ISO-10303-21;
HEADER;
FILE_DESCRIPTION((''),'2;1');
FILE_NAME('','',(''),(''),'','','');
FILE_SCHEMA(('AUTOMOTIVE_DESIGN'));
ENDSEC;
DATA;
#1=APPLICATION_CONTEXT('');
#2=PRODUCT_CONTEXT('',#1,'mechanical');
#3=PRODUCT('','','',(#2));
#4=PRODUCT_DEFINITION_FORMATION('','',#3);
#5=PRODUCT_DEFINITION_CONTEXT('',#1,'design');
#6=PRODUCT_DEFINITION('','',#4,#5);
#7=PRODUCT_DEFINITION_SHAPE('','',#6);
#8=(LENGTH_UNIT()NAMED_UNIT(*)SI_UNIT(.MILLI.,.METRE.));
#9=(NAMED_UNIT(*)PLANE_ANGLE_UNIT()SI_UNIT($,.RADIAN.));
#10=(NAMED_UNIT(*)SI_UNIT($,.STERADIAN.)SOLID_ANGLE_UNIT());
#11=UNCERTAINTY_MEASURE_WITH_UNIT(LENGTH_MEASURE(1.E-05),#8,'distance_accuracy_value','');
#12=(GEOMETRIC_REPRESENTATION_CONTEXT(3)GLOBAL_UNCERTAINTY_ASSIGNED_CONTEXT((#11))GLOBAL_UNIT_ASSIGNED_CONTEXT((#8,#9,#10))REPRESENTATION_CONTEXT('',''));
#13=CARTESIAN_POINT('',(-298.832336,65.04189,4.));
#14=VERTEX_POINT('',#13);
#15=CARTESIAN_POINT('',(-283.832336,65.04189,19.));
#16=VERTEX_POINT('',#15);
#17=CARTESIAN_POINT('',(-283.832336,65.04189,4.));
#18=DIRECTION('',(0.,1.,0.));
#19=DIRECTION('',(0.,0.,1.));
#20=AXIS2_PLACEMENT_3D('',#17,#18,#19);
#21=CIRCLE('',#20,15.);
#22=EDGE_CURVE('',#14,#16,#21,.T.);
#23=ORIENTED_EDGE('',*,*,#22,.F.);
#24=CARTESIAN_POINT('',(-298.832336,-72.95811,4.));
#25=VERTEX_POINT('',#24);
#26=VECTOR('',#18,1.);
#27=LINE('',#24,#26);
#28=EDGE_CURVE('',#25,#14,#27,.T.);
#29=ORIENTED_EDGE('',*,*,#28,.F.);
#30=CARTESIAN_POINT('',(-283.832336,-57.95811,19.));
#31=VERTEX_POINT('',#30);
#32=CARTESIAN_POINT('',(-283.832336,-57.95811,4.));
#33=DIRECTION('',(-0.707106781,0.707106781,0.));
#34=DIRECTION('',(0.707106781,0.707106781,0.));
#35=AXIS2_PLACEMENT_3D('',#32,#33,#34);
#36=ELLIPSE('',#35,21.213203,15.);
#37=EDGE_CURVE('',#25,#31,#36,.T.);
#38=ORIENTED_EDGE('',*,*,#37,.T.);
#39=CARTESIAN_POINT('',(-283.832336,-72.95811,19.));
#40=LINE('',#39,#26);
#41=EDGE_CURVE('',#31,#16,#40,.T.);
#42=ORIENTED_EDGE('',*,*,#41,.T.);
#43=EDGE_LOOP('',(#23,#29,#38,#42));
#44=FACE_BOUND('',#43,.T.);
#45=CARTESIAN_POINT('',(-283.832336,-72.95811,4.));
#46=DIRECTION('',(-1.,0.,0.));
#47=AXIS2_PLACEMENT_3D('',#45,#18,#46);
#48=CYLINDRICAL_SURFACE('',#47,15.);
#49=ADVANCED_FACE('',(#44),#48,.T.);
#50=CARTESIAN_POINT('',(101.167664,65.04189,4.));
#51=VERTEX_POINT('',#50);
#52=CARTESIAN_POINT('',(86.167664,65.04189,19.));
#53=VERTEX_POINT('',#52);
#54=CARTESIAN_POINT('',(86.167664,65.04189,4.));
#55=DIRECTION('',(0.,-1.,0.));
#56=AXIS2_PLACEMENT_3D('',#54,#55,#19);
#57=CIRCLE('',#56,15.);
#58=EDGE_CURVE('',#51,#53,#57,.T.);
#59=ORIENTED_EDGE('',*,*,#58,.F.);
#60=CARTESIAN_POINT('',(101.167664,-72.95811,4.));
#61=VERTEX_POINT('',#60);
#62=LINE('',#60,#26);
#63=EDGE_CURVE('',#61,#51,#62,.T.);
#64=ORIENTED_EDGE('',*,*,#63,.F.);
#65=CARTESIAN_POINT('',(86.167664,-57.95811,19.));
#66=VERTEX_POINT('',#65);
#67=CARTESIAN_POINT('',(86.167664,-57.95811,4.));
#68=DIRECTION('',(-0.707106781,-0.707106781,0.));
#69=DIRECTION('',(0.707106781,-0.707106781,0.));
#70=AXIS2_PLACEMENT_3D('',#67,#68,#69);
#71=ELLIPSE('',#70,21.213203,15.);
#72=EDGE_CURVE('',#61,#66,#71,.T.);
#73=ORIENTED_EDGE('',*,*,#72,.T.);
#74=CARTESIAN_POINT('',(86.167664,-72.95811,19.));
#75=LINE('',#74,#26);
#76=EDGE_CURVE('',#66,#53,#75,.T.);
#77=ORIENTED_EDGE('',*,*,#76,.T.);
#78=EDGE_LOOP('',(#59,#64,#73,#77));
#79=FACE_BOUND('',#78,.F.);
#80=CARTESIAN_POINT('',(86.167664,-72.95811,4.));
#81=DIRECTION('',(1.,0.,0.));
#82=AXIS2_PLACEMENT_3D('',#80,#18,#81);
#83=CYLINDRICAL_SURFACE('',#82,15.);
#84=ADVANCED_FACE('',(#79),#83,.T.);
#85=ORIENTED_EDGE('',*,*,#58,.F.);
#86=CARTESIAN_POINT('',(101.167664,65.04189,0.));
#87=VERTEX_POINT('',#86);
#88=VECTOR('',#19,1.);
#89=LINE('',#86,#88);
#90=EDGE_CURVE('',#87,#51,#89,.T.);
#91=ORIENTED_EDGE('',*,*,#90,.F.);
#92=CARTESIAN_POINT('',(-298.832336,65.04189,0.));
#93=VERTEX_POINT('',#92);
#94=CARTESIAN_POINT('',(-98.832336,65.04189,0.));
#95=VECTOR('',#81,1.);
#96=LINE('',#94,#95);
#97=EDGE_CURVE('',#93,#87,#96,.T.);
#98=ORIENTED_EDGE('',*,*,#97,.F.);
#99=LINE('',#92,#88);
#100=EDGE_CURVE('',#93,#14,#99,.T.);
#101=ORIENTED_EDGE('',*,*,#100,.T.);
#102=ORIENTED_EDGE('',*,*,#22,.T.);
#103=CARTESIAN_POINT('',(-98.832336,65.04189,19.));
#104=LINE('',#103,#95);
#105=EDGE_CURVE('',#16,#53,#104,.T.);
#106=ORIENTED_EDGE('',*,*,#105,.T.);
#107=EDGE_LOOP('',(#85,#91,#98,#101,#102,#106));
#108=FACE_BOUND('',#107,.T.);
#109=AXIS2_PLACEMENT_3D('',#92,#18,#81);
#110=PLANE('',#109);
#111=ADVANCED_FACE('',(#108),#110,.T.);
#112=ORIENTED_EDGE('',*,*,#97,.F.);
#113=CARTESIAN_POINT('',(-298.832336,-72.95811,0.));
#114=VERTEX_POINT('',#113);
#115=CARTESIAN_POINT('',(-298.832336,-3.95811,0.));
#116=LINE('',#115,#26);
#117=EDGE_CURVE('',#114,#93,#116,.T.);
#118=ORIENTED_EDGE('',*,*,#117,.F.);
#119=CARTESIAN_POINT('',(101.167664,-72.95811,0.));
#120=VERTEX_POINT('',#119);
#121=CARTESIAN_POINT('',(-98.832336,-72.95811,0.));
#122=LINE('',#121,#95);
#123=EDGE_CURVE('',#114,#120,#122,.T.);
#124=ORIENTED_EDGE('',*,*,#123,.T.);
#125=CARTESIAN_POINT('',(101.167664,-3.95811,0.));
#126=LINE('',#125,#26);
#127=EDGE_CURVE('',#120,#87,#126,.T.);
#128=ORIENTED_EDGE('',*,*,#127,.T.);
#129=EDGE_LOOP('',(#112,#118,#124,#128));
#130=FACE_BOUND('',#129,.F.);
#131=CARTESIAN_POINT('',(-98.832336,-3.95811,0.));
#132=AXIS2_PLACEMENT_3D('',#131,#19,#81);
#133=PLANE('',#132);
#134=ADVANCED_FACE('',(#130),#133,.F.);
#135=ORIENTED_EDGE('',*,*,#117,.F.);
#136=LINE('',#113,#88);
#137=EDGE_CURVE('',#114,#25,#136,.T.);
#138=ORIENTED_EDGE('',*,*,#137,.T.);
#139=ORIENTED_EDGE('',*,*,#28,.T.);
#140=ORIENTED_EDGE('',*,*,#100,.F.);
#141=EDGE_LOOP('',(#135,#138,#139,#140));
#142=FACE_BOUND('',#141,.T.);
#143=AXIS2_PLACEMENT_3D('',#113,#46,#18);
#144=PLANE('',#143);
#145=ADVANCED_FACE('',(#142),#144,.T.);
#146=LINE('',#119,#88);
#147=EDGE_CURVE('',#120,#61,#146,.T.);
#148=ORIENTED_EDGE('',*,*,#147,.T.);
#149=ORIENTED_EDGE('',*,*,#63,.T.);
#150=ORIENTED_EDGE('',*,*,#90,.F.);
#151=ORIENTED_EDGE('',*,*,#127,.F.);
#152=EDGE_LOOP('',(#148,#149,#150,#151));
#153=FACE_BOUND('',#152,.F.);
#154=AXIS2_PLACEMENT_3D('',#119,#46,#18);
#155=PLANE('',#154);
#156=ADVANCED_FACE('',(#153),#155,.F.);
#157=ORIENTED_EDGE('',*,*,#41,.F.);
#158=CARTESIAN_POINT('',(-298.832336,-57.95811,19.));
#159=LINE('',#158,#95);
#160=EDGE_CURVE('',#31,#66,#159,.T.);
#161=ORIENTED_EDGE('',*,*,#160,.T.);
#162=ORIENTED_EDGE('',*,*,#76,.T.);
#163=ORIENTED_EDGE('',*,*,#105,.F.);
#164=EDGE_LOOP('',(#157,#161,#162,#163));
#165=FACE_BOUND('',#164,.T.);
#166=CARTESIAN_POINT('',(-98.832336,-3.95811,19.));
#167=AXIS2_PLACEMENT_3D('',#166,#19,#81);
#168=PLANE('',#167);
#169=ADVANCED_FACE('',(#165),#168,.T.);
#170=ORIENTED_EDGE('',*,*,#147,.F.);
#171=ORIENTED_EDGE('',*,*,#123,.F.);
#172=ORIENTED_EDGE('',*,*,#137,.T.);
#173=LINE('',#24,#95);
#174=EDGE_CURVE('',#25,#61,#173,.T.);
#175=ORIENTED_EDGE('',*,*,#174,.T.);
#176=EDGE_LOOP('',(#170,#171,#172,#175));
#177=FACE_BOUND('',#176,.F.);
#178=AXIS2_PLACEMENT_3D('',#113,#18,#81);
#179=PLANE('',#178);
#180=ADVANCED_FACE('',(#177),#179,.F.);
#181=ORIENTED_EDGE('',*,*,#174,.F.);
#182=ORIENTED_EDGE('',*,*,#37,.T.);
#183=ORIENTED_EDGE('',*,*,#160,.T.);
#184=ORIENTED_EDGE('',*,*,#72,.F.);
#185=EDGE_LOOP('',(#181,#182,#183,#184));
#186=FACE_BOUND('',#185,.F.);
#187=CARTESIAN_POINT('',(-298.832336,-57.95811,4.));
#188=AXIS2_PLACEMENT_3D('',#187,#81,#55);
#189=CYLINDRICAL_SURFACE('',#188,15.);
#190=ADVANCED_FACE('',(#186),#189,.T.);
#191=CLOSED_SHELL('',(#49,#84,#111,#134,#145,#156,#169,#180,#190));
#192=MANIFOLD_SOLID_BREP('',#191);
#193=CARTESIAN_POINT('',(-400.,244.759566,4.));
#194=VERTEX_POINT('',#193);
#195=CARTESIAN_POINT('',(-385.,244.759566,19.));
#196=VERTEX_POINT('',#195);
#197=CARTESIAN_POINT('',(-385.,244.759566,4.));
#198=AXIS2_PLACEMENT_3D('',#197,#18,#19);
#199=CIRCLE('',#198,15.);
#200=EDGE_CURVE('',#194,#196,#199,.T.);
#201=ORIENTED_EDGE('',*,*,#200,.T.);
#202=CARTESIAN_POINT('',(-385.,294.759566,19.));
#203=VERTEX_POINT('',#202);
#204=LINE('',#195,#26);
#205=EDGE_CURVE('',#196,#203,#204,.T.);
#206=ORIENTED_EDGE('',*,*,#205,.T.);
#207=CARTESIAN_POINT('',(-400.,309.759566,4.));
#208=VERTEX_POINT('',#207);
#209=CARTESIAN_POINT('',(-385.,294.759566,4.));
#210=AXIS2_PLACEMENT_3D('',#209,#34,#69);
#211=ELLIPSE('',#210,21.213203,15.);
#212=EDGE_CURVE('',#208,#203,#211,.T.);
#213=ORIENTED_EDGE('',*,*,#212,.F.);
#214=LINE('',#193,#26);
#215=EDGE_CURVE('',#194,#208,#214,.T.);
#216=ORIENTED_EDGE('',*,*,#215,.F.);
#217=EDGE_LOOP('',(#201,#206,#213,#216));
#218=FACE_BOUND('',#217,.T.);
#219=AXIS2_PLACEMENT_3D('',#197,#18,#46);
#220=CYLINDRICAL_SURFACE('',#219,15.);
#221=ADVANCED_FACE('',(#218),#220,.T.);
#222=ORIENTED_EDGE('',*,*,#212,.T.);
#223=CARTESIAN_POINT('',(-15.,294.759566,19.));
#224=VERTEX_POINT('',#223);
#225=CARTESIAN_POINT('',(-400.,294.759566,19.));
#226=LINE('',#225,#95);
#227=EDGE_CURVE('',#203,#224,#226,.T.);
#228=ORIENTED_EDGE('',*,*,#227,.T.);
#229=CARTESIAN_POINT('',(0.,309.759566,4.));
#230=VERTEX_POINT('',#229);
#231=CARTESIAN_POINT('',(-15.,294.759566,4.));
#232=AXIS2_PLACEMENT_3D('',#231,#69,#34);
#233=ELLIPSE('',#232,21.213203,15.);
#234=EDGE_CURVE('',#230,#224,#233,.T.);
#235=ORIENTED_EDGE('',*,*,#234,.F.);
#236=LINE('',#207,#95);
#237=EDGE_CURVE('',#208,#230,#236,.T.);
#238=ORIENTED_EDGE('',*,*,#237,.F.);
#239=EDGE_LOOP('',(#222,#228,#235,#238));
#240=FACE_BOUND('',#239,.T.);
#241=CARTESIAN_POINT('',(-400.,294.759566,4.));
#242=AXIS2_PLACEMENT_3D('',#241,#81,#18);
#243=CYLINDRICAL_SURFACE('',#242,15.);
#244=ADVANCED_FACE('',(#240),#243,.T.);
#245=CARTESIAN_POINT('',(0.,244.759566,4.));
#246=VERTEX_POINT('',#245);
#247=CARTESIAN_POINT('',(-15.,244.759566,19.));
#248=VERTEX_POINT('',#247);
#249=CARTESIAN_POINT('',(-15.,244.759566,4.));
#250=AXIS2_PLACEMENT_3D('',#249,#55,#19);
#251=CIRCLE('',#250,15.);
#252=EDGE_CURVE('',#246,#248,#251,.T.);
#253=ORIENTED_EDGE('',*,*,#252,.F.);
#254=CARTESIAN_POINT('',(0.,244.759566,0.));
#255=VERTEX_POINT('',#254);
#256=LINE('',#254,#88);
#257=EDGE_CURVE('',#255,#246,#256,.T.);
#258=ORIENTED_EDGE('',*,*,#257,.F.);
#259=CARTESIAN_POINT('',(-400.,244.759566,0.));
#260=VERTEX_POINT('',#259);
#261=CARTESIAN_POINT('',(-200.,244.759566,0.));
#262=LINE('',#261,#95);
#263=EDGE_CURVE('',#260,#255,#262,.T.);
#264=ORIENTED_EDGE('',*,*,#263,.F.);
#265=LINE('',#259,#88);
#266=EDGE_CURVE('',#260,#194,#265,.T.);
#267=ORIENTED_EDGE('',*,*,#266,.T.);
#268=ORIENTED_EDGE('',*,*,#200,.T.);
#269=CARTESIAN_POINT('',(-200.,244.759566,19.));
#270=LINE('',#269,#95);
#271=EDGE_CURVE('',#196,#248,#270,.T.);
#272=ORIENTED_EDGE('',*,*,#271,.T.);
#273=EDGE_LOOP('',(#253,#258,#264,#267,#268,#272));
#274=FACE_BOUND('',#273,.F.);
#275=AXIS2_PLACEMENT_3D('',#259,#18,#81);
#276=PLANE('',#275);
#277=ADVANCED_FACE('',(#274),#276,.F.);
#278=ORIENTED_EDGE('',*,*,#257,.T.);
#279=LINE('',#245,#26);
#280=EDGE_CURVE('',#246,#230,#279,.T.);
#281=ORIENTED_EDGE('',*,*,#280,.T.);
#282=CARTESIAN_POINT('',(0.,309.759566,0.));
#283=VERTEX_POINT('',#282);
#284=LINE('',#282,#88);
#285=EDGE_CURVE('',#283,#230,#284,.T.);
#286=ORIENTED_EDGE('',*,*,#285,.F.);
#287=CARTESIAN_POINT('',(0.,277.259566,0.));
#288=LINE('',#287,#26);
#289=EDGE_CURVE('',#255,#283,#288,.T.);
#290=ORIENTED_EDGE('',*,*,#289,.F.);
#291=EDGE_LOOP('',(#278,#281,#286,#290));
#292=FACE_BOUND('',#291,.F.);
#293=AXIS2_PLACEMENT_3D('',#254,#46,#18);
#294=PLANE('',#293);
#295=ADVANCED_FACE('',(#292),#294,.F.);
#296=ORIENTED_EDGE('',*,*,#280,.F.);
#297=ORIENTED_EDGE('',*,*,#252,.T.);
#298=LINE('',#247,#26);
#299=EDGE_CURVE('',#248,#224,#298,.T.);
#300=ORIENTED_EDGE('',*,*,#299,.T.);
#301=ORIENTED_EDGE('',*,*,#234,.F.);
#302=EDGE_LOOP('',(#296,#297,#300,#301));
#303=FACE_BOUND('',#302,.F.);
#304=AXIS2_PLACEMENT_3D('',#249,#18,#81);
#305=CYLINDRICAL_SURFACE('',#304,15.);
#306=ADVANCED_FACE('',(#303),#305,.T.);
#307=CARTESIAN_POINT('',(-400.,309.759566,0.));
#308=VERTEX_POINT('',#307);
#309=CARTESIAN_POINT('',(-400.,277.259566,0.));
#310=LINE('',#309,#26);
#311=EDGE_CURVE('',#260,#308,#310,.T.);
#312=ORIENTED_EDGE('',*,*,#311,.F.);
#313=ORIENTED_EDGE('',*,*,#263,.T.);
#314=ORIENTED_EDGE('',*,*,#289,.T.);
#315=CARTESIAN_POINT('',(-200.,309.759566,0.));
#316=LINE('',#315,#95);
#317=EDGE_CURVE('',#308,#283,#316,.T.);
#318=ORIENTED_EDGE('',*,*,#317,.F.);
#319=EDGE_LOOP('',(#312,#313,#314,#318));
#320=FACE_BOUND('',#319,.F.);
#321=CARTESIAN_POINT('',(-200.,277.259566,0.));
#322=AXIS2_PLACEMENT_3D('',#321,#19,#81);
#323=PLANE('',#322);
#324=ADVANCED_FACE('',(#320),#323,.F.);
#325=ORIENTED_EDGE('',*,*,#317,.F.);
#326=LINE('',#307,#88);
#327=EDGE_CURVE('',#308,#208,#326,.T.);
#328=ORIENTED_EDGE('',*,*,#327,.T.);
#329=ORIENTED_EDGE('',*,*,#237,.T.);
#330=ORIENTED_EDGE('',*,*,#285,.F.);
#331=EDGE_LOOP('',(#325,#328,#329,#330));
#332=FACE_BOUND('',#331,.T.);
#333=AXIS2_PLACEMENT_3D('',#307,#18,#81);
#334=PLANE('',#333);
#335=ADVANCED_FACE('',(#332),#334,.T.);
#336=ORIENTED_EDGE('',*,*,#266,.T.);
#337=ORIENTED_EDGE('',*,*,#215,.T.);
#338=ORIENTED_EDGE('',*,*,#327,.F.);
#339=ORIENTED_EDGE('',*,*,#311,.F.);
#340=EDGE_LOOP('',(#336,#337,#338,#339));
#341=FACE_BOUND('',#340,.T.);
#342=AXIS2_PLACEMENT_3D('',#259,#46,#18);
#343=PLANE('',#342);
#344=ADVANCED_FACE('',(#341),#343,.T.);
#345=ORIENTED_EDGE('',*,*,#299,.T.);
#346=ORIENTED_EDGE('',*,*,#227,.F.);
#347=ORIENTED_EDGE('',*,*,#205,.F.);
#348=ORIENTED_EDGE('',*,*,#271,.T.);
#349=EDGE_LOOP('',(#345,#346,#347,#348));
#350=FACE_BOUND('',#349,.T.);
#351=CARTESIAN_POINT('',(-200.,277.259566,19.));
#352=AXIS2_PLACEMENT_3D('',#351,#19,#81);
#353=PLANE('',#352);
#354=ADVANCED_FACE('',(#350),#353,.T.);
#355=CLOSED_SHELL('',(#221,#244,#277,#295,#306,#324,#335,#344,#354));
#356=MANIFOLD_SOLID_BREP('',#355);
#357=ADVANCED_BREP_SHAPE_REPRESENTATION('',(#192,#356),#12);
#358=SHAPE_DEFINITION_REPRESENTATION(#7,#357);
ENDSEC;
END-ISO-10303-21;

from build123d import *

# Parameters (mm, degrees)
F1_W     = 400
F1_H     = 65
F2_DEPTH = 19
F0_W     = 400
F0_H     = 138
F3_DEPTH = 19
F4_R     = 15
F4_2_R   = 15


with BuildPart() as f2:
    # F1 (on Top) → F2 (new body)
    with BuildSketch(Plane.XY):
        with Locations((-200, 277.2595660102)):
            Rectangle(F1_W, F1_H)
    extrude(amount=F2_DEPTH)

    # F4
    f4_edges = [f2.edges().sort_by_distance(p)[0] for p in [
        (-200, 309.759566, 19),
        (-400, 277.259566, 19),
        (0, 277.259566, 19),
    ]]
    fillet(f4_edges, radius=F4_R)


with BuildPart() as f3:
    # F0 (on Top) → F3 (new body)
    with BuildSketch(Plane.XY):
        with Locations((-98.8323359787, -3.9581097662)):
            Rectangle(F0_W, F0_H)
    extrude(amount=F3_DEPTH)

    # F4#2
    f4_2_edges = [f3.edges().sort_by_distance(p)[0] for p in [
        (-98.832336, -72.95811, 19),
        (-298.832336, -3.95811, 19),
        (101.167664, -3.95811, 19),
    ]]
    fillet(f4_2_edges, radius=F4_2_R)


solid = Compound([f2.part, f3.part])
